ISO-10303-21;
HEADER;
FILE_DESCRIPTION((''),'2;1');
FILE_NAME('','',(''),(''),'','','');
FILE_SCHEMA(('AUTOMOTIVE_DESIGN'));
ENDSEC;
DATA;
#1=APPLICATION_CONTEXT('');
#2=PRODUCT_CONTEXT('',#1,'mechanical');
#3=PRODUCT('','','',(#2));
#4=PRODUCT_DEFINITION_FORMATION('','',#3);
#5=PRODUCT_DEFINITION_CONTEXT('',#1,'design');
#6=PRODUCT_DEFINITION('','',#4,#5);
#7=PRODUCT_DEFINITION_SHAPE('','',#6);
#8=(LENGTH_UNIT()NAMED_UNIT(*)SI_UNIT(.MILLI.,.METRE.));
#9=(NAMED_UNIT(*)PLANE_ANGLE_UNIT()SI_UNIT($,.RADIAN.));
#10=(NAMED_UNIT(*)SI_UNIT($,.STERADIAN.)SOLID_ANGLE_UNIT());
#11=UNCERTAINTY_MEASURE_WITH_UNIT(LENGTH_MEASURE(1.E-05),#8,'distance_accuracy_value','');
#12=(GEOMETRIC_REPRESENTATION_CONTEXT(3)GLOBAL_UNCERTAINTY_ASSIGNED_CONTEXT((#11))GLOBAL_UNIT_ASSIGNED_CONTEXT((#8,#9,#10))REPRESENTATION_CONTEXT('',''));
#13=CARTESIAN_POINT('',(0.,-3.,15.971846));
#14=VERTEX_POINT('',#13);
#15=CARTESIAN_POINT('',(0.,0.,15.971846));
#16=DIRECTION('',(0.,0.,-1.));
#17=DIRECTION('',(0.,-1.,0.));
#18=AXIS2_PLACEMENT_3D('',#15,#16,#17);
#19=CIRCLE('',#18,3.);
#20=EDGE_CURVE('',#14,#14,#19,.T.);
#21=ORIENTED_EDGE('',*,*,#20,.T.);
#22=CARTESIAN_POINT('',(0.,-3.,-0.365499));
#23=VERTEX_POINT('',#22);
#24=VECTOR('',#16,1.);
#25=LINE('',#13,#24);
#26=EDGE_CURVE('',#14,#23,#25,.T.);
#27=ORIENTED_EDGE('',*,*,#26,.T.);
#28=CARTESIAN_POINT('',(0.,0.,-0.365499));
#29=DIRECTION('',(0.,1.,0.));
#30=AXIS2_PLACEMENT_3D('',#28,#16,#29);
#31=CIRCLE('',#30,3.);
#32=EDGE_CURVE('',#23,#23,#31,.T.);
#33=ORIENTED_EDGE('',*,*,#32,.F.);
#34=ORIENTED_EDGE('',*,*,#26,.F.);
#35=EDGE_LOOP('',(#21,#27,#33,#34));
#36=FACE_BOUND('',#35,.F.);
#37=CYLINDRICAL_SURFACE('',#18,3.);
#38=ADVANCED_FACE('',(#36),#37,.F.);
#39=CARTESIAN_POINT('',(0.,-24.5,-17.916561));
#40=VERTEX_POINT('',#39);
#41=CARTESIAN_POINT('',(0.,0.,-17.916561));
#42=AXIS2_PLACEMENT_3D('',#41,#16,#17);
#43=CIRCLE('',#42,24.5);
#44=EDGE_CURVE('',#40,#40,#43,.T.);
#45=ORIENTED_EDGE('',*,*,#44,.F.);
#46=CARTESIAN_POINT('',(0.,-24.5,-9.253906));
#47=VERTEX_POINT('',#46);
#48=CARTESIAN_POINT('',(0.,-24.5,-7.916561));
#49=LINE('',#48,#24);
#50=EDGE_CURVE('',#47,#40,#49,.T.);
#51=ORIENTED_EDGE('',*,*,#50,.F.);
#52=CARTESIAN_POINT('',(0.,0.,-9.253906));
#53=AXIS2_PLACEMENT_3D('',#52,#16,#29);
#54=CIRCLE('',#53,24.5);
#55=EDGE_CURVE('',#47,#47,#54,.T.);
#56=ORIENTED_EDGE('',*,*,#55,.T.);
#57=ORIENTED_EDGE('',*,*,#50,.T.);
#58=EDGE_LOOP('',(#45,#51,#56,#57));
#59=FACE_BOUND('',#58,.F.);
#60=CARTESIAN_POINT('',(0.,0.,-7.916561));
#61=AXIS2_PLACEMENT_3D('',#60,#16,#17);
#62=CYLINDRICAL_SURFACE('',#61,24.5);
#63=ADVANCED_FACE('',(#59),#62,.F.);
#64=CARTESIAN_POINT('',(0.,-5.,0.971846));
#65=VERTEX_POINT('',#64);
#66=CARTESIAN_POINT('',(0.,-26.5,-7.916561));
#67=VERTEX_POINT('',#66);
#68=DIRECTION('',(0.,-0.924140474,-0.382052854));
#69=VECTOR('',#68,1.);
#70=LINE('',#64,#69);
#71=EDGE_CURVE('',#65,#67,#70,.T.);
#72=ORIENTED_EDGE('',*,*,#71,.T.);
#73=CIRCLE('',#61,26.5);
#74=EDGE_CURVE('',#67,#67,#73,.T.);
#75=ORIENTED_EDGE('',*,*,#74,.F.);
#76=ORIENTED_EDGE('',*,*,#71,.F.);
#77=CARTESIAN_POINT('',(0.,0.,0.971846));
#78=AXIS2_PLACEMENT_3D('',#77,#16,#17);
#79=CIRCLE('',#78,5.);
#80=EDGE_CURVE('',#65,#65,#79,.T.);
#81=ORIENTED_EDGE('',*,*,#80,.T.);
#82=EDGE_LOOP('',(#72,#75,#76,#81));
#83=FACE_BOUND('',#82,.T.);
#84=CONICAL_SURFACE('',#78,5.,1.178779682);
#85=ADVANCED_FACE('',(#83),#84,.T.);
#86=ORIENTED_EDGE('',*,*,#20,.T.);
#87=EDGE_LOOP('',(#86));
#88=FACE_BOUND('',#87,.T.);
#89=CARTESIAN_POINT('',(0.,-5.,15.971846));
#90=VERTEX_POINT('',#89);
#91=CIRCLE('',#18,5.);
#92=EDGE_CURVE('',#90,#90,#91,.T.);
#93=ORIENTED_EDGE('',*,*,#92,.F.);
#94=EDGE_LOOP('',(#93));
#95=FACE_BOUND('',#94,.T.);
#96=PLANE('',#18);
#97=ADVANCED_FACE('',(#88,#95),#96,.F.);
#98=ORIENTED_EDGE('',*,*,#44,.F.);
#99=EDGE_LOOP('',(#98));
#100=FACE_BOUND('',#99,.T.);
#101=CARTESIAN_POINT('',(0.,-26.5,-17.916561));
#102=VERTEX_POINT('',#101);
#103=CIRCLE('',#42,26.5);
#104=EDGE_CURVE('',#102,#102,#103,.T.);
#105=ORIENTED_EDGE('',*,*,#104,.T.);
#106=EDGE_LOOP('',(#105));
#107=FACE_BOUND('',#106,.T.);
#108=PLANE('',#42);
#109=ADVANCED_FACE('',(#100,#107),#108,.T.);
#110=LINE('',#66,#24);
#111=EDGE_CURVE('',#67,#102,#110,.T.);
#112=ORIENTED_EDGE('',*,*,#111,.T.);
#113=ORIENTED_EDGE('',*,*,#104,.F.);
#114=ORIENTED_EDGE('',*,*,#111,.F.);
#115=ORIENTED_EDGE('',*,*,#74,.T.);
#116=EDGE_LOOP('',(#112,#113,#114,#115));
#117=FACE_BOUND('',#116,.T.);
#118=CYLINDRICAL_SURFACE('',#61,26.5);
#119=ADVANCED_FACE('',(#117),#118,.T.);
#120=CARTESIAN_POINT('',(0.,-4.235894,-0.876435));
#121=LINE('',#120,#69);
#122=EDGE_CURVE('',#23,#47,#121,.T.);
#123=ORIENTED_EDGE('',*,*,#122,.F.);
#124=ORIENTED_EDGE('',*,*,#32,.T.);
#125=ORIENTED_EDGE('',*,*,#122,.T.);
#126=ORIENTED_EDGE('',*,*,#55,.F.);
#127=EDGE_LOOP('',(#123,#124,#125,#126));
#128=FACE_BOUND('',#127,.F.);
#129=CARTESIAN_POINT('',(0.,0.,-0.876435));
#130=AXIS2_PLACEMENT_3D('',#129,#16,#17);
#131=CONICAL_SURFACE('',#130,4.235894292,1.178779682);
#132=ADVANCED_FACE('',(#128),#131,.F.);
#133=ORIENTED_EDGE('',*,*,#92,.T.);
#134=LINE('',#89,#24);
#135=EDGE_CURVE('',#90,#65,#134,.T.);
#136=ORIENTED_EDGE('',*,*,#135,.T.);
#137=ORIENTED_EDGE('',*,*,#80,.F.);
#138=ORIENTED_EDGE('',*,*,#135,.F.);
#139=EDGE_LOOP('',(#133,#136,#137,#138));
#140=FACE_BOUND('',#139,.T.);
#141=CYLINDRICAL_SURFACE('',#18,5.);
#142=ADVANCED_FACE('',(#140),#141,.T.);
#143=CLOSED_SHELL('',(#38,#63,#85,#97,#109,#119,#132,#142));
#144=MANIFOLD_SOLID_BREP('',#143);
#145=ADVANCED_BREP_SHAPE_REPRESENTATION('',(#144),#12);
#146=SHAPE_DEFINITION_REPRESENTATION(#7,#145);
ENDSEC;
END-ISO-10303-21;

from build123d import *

# Parameters (mm, degrees)
F2_T = -2


# Not quite as in the source:
# - the program builds the solid bodies; features that only make, move or delete a surface that nothing else refers to are left out


with BuildPart() as f1:
    # F0 (on Right) → F1 (revolve)
    with BuildSketch(Plane.YZ):
        Polygon((0, 15.9718455747), (-5, 15.9718455747), (-5, 0.9718455747), (-26.5, -7.9165611044), (-26.5, -17.9165611044), (0, -17.9165611044), align=None)
    revolve(axis=Axis((0, 0, -0.4027476534), (0, 0, -1)))

    # F2
    f2_openings = [f1.faces().sort_by_distance(p)[0] for p in [
        (0, 0, -17.916561),
        (0, 0, 15.971846),
    ]]
    offset(amount=F2_T, openings=f2_openings, kind=Kind.INTERSECTION)


solid = f1.part
